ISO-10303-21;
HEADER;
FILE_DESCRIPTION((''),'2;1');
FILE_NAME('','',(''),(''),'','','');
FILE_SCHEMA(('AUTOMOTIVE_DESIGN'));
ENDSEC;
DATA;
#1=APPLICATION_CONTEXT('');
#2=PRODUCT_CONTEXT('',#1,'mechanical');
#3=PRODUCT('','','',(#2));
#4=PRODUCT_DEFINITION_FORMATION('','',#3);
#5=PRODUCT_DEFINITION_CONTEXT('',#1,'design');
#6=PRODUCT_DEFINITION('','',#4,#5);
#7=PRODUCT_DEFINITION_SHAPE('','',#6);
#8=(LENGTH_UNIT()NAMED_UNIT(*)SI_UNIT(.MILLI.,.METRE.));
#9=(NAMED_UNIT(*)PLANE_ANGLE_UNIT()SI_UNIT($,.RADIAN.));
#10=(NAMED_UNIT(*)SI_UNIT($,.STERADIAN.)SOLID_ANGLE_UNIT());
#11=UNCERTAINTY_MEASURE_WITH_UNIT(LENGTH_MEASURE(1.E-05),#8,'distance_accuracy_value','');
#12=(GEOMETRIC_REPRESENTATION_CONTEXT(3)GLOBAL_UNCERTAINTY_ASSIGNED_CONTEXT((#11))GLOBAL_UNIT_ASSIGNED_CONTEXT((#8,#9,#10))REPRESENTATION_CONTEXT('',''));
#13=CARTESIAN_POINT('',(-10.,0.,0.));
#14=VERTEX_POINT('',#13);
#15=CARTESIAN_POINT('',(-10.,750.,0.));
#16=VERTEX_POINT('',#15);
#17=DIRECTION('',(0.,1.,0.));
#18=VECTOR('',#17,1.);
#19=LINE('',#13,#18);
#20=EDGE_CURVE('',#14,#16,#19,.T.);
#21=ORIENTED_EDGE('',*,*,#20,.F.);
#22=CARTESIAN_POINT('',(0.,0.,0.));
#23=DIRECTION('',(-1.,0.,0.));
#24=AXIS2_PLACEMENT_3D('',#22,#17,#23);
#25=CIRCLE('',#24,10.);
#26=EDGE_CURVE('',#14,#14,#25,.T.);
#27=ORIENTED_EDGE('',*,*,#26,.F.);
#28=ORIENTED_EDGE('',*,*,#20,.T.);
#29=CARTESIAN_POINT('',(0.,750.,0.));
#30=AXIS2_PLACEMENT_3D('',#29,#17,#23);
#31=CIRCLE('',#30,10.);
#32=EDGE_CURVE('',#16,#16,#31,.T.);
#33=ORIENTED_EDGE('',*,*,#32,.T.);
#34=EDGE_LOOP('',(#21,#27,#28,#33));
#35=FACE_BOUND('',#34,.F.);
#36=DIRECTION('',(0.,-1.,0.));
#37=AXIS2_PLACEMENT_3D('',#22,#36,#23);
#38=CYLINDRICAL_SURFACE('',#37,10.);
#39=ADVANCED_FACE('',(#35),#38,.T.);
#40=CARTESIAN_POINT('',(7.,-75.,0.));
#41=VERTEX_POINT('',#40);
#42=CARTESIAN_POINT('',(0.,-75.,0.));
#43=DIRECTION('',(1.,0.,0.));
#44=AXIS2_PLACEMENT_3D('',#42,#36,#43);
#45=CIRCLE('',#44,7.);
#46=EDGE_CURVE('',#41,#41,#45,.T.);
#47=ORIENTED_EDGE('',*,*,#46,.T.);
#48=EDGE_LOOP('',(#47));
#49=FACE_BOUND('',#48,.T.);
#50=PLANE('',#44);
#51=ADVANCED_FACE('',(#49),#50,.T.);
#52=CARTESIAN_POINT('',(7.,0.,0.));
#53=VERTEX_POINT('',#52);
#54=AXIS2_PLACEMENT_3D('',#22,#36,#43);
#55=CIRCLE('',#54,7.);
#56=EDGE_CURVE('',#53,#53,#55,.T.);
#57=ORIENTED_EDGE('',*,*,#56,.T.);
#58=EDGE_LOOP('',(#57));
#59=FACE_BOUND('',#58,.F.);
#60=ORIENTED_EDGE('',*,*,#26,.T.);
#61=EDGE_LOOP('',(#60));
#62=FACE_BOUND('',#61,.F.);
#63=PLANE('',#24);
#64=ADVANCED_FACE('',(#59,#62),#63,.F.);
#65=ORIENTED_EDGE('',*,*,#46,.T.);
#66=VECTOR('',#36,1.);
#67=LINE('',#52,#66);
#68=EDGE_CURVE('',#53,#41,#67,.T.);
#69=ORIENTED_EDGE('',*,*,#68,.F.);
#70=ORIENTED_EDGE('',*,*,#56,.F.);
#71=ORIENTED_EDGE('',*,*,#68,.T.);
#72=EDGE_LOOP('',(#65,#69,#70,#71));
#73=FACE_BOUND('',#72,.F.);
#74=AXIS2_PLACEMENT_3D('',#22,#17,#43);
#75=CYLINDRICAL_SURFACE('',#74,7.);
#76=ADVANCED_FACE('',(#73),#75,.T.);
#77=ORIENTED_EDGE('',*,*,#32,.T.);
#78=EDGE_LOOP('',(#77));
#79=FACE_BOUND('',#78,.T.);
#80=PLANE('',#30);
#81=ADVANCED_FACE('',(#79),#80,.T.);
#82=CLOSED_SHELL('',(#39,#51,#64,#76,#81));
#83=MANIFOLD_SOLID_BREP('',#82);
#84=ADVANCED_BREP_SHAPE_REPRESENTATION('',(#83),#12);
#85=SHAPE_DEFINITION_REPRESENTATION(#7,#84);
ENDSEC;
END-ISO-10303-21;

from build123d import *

# Parameters (mm, degrees)
F0_R     = 7
F1_DEPTH = 75
F2_R     = 10
F2_R_2   = 7
F3_DEPTH = 750


with BuildPart() as f1:
    # F0 (on Front) → F1 (new body)
    with BuildSketch(Plane.XZ):
        Circle(F0_R)
    extrude(amount=F1_DEPTH)

    # F2 (on face) → F3 (join)
    with BuildSketch(Plane(origin=(0, 0, 0), x_dir=(-1, 0, 0), z_dir=(0, 1, 0))):
        Circle(F2_R)
        Circle(F2_R_2, mode=Mode.SUBTRACT)
        Circle(F2_R_2)
    extrude(amount=F3_DEPTH)


solid = f1.part
